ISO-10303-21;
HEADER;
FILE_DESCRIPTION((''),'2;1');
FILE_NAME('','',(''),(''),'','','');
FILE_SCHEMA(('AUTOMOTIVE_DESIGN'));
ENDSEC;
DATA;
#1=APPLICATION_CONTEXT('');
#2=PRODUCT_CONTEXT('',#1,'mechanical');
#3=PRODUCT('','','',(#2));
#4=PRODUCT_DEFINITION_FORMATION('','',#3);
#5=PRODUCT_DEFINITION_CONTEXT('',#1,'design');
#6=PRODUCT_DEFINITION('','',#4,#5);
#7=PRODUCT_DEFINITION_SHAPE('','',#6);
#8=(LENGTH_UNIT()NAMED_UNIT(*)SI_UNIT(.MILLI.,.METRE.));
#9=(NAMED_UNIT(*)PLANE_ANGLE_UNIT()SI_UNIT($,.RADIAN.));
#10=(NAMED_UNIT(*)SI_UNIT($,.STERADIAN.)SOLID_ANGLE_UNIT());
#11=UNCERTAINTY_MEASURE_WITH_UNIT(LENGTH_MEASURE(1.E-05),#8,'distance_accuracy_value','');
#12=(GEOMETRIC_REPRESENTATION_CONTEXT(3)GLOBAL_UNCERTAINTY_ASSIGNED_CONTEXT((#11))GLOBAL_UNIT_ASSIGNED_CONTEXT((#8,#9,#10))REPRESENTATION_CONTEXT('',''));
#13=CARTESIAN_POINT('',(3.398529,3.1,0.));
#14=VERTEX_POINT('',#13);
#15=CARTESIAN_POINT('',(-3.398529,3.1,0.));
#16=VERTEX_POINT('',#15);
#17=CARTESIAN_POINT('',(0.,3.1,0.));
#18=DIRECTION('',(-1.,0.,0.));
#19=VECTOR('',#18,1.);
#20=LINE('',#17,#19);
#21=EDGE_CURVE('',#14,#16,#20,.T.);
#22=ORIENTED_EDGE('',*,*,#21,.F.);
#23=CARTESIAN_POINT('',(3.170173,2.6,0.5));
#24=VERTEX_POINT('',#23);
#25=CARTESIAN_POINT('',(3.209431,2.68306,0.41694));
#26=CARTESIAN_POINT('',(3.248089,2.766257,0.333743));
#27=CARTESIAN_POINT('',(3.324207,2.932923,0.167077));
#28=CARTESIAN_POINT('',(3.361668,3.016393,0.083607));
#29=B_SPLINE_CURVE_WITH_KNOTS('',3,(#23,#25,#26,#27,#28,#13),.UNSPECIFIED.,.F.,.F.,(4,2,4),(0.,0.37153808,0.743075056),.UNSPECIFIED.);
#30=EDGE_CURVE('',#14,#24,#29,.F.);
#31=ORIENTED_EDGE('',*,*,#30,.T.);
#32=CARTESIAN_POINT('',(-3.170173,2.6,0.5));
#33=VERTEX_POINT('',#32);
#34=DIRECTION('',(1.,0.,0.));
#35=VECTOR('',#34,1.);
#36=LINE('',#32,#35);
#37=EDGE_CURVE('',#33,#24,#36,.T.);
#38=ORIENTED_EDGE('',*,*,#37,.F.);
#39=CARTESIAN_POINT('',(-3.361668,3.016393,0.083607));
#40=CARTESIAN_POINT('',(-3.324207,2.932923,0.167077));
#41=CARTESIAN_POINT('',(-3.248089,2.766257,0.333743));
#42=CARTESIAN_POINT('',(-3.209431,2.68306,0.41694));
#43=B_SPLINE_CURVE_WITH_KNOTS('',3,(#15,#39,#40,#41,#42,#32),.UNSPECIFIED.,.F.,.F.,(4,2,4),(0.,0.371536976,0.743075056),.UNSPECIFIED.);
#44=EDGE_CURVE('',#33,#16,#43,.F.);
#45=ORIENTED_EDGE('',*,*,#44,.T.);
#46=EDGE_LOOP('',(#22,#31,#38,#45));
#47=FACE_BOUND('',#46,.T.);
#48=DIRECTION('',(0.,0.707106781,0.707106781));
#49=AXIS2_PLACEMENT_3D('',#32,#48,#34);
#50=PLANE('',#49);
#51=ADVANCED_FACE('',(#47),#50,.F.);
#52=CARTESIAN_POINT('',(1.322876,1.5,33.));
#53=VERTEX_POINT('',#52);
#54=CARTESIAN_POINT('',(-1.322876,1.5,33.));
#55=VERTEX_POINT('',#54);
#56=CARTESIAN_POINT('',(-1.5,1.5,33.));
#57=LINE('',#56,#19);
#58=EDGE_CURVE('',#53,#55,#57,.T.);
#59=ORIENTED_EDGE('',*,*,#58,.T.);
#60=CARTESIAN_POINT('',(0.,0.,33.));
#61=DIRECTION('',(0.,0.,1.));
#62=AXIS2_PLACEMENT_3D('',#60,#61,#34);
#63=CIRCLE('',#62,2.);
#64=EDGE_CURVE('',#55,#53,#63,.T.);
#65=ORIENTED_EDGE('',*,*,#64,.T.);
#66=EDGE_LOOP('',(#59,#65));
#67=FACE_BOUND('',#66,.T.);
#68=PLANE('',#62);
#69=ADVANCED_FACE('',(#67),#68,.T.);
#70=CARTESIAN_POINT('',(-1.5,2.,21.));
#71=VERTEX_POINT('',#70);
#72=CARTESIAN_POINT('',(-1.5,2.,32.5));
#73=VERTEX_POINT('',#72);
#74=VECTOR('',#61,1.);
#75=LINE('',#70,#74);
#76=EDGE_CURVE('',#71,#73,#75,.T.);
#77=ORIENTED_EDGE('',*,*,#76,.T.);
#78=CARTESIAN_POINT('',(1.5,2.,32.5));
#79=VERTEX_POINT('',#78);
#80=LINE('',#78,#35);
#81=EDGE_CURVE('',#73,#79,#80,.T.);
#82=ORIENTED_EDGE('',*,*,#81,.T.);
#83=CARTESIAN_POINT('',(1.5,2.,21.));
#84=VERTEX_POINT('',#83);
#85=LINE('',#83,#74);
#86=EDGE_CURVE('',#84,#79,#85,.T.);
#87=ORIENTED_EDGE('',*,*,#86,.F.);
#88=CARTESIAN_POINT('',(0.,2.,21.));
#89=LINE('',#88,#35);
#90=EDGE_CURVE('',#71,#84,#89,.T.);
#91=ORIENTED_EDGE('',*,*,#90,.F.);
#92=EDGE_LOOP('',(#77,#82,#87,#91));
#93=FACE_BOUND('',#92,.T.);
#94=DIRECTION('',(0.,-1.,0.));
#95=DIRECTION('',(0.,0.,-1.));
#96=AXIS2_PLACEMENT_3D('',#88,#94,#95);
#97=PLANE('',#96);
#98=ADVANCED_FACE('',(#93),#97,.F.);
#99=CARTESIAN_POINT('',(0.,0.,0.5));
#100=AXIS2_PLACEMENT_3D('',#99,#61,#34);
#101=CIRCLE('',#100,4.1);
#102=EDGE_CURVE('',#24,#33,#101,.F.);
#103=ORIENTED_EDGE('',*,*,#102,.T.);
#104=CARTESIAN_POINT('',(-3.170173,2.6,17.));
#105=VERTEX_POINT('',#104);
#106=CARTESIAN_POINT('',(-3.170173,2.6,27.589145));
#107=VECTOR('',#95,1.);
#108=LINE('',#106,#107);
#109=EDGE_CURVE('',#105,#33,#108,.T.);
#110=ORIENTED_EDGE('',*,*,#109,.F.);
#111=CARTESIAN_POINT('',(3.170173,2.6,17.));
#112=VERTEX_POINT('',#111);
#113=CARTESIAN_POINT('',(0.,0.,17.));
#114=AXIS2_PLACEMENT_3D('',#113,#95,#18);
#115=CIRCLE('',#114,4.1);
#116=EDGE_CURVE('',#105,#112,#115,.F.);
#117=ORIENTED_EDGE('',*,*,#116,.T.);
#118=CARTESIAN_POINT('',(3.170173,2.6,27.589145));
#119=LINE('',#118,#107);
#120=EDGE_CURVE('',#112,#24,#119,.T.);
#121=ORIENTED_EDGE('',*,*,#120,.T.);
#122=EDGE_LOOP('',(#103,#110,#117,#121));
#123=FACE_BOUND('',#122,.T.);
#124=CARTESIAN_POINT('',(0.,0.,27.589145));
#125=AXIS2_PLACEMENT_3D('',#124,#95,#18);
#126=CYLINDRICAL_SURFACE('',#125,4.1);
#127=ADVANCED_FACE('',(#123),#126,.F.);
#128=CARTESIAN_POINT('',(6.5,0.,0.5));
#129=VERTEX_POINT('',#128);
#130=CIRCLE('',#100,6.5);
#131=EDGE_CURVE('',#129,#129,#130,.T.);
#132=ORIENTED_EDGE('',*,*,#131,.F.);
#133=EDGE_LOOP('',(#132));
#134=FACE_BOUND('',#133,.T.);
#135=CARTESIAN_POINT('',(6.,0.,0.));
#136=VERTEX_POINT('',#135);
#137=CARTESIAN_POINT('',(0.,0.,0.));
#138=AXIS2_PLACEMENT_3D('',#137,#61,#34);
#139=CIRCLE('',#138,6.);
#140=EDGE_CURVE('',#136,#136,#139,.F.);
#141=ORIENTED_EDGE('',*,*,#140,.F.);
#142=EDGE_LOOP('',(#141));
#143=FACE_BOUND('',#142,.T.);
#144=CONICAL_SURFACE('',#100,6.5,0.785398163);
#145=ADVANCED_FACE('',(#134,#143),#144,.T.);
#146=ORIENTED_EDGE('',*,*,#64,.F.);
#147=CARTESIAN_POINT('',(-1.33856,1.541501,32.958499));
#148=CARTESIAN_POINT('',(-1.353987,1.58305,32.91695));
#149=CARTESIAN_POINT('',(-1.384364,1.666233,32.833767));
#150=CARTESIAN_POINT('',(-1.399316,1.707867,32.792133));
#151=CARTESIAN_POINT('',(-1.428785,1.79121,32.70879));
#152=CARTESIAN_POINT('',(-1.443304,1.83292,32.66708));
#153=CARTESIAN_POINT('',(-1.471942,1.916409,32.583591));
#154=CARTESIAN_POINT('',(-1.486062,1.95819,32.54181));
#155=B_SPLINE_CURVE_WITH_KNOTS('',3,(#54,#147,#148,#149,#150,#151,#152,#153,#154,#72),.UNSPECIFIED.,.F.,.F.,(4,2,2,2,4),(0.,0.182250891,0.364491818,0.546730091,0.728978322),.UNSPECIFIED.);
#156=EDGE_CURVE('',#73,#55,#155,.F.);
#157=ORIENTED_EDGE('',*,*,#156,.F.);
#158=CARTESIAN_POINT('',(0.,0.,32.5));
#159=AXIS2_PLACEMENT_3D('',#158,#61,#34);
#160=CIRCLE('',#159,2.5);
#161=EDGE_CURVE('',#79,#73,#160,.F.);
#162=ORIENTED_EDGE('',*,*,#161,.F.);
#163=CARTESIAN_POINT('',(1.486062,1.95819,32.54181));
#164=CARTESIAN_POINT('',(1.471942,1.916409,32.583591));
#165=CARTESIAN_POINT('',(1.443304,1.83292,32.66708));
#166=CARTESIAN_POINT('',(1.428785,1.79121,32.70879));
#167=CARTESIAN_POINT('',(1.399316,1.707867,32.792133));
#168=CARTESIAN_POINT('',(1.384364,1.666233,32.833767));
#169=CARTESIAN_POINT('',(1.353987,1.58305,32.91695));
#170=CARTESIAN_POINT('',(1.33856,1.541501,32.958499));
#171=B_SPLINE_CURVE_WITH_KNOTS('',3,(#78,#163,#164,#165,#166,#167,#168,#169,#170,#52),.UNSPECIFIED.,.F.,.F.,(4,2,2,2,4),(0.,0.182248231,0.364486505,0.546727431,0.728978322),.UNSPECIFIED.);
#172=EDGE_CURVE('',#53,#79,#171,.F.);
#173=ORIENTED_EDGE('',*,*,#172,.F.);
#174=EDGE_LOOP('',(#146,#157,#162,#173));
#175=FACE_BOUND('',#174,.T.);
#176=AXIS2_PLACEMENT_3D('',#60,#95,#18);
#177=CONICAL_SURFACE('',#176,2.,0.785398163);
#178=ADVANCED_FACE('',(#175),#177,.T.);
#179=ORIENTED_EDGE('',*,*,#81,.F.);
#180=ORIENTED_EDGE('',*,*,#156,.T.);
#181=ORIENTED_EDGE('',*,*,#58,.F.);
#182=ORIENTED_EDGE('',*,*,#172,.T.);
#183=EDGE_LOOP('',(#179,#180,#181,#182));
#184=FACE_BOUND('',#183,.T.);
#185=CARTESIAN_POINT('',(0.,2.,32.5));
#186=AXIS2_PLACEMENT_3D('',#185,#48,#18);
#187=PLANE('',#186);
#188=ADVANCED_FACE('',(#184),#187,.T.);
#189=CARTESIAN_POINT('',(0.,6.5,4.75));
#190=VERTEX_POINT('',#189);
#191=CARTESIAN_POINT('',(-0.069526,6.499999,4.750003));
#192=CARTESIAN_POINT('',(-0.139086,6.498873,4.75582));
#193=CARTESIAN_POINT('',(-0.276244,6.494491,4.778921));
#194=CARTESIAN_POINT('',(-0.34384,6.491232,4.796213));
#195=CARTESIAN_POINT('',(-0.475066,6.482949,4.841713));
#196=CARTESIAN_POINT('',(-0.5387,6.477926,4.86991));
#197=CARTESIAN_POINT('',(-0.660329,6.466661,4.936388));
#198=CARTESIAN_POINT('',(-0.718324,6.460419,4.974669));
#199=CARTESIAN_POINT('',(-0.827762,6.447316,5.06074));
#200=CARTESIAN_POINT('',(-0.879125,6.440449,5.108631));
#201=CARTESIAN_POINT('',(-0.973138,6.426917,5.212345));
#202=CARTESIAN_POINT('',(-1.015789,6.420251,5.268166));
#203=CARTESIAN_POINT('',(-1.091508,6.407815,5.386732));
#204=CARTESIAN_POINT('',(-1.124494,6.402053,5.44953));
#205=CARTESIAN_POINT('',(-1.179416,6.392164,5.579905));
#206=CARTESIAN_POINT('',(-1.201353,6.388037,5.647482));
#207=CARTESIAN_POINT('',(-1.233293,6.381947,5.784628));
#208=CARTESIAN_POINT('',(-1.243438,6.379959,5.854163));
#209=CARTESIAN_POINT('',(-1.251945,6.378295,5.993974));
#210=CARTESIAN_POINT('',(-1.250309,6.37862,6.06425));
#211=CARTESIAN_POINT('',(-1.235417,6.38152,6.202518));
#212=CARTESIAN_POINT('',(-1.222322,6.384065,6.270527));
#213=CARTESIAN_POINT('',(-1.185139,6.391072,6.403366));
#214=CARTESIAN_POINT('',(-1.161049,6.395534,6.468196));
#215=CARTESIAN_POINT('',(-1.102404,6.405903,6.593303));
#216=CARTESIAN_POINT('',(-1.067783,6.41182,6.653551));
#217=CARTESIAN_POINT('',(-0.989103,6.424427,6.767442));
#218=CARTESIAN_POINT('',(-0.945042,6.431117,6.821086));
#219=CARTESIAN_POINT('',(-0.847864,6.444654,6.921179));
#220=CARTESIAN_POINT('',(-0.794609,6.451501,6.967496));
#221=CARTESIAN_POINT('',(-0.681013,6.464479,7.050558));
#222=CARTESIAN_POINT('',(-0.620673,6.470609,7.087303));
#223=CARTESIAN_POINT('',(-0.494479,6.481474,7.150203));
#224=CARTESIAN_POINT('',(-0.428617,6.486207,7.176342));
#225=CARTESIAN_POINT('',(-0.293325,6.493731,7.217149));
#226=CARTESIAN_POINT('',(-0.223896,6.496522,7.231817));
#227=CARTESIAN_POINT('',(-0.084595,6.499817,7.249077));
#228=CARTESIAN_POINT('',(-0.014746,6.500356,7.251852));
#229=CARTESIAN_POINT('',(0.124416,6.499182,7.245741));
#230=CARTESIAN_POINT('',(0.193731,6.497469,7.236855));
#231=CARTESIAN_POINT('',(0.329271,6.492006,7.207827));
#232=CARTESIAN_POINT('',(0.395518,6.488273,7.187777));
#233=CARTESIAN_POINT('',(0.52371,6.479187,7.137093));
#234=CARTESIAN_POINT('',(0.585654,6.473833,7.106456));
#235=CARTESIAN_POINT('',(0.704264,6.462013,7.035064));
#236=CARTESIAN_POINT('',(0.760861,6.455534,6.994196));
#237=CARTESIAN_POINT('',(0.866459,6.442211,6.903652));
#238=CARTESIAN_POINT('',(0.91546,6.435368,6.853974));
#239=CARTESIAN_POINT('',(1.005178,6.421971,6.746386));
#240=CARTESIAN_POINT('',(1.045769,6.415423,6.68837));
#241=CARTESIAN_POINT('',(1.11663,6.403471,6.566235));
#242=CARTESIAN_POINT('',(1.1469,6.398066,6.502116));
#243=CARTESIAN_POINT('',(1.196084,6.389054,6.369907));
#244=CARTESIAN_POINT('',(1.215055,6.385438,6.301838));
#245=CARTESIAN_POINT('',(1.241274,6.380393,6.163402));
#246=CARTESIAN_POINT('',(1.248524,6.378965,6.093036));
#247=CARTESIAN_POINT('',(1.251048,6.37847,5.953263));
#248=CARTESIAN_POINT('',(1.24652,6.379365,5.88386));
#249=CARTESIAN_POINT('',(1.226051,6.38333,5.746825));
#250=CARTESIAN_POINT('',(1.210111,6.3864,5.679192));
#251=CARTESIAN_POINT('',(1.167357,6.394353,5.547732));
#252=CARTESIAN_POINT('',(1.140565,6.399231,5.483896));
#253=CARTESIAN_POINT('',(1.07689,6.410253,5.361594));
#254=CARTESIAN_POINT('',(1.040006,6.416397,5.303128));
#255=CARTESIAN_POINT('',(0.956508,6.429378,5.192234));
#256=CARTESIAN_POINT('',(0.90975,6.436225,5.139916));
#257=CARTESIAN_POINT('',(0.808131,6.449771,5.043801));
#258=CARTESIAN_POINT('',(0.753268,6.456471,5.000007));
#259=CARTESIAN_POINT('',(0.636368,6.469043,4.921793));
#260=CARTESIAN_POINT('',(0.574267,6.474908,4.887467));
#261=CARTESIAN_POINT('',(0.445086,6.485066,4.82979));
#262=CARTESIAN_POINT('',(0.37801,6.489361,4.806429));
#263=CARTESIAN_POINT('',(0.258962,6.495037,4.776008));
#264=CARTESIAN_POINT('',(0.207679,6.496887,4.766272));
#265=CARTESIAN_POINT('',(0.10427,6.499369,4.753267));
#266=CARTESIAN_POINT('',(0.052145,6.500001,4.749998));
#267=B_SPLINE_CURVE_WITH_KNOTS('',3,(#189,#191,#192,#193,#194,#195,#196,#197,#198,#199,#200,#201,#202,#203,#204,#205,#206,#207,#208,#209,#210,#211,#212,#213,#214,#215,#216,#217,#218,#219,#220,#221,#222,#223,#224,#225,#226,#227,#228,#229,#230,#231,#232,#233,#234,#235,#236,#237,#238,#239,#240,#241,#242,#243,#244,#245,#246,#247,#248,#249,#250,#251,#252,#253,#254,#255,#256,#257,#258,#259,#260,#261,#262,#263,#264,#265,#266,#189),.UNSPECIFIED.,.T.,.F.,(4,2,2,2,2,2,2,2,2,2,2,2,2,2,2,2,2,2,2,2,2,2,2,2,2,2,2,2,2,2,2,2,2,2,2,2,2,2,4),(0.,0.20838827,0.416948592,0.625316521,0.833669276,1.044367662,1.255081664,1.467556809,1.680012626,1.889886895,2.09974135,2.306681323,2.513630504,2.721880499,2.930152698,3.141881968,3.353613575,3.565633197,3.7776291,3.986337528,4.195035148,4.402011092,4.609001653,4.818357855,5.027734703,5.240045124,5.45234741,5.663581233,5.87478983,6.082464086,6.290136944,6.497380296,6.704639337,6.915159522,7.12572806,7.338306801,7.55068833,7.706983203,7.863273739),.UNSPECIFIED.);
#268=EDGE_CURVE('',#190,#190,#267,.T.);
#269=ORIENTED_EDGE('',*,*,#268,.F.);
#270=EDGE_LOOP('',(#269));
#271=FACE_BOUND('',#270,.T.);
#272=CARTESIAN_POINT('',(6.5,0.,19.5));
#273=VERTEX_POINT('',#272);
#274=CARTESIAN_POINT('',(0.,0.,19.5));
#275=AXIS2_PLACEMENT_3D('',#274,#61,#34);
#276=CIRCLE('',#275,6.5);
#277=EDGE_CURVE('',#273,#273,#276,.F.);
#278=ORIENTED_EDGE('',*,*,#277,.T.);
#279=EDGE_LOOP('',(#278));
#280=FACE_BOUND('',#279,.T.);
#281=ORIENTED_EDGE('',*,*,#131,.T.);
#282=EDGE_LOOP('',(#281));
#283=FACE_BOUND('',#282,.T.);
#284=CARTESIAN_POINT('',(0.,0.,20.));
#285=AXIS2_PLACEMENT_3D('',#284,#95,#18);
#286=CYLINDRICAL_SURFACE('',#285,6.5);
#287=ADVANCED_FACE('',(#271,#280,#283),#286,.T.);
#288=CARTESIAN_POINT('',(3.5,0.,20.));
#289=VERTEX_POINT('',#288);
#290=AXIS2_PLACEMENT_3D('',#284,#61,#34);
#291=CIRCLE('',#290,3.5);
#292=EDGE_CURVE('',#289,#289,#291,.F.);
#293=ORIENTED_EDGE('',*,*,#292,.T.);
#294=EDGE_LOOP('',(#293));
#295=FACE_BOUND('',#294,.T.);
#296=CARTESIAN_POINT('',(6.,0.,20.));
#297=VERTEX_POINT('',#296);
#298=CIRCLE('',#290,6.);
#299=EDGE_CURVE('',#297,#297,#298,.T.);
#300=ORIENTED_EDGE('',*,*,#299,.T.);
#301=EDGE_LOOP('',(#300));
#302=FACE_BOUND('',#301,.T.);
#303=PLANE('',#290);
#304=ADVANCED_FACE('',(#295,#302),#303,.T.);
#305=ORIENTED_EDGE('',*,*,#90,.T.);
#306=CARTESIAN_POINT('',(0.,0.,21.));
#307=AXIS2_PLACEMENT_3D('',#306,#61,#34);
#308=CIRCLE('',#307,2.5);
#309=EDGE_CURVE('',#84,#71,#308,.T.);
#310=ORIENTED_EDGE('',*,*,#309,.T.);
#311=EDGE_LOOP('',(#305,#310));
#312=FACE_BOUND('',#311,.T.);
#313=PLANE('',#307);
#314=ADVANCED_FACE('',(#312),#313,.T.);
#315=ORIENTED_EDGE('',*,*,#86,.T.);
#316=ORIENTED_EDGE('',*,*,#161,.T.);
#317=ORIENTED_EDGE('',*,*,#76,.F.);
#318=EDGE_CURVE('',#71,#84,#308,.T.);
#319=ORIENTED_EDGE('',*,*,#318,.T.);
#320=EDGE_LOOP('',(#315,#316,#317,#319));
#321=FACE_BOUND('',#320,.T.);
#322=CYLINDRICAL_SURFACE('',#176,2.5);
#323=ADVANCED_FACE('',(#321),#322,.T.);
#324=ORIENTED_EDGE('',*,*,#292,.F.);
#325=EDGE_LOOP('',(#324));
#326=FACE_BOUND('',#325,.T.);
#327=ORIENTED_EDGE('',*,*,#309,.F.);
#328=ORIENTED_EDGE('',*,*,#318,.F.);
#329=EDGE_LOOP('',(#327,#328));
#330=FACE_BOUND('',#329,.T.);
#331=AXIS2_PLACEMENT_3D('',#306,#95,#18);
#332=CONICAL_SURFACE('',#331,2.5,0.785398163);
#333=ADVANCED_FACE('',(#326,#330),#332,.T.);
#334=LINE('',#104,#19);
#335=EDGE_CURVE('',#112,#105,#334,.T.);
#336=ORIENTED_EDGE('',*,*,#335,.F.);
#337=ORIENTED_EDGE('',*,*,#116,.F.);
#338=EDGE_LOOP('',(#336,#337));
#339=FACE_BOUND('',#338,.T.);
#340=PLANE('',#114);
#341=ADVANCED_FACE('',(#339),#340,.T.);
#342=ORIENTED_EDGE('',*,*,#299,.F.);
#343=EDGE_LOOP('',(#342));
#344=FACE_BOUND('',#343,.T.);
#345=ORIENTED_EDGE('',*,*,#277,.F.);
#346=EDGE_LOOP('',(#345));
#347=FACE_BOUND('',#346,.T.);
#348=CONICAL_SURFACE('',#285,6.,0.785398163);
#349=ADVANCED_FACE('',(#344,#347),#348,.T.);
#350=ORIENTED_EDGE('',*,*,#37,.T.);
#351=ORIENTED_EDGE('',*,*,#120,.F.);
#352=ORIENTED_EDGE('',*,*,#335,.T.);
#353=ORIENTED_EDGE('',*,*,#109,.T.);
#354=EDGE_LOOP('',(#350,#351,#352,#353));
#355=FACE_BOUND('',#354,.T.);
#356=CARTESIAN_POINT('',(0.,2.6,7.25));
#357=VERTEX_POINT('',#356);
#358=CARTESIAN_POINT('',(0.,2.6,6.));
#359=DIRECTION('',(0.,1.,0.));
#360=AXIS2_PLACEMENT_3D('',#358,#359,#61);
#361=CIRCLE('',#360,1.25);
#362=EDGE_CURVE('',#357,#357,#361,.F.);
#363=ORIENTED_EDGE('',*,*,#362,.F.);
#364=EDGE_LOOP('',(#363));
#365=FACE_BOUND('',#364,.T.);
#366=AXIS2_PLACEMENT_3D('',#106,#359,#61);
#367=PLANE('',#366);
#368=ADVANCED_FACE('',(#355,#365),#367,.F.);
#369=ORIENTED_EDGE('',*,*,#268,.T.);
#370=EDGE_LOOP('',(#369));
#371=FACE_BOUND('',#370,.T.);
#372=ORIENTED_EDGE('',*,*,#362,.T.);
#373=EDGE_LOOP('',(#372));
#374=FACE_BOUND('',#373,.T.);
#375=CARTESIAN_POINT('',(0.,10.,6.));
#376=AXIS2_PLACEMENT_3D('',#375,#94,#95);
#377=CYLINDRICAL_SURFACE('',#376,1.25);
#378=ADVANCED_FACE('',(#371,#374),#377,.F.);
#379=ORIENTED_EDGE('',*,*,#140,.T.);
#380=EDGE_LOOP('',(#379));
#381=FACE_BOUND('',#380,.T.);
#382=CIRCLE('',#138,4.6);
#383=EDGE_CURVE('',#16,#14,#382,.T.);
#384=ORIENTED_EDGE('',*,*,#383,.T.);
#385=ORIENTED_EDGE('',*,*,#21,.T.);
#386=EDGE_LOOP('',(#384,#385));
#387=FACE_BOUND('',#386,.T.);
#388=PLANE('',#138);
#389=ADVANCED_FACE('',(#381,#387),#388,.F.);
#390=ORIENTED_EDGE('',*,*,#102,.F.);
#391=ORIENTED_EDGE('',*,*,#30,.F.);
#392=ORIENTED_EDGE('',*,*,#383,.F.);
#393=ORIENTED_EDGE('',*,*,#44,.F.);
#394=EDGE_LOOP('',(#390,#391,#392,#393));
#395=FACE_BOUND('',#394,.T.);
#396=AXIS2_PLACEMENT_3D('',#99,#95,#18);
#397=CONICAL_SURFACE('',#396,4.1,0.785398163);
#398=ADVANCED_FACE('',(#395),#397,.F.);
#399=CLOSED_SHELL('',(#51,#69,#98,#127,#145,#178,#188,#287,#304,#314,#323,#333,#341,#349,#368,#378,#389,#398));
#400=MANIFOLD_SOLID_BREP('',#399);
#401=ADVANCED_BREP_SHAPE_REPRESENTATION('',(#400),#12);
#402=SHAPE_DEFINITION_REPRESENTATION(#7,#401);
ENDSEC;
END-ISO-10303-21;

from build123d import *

# Parameters (mm, degrees)
SKETCH_1_R          = 6.5
EXTRUDE_1_DEPTH     = 20
CUT_EXTRUDE_1_DEPTH = 17
SKETCH_3_R          = 2.5
EXTRUDE_2_DEPTH     = 13
CUT_EXTRUDE_START   = -12
CUT_EXTRUDE_2_DEPTH = 12
CHAMFER_1_SIZE      = 1
CUT_EXTRUDE_3_DEPTH = 17
CHAMFER_2_SIZE      = 0.5
CHAMFER_3_SIZE      = 0.5
SKETCH_6_R          = 1.25
CUT_EXTRUDE_4_DEPTH = 10


with BuildPart() as part:
    # 草图1 → 凸台-拉伸1 (new body)
    with BuildSketch(Plane.XY):
        Circle(SKETCH_1_R)
    extrude(amount=EXTRUDE_1_DEPTH)

    # 草图2 → 切除-拉伸1 (cut)
    with BuildSketch(Plane(origin=(0, 0, 0), x_dir=(-1, 0, 0), z_dir=(0, 0, -1))):
        with BuildLine():
            Line((3.122498999, 2.5), (-3.122498999, 2.5))
            ThreePointArc((-3.122498999, 2.5), (-3.605551275, -1.732050808), (0, -4))
            ThreePointArc((0, -4), (2.828427125, -2.828427125), (4, 0))
            ThreePointArc((4, 0), (3.774254628, 1.324764885), (3.122498999, 2.5))
        make_face()
    extrude(amount=-CUT_EXTRUDE_1_DEPTH, mode=Mode.SUBTRACT)

    # 草图3 → 凸台-拉伸2 (add)
    with BuildSketch(Plane.XY.offset(20)):
        with Locations(Location((0, 0, 0), (0, 0, 180))):
            Circle(SKETCH_3_R)
    extrude(amount=EXTRUDE_2_DEPTH)

    # 草图4 → 切除-拉伸2 (cut)
    with BuildSketch(Plane.XY.offset(33).offset(CUT_EXTRUDE_START)):
        with BuildLine():
            Line((-1.5, 2), (1.5, 2))
            ThreePointArc((1.5, 2), (0, 2.5), (-1.5, 2))
        make_face()
    extrude(amount=CUT_EXTRUDE_2_DEPTH, mode=Mode.SUBTRACT)

    # 倒角1
    chamfer_1_edges = [part.edges().sort_by_distance(p)[0] for p in [
        (2.5, 0, 20),
    ]]
    chamfer(chamfer_1_edges, length=CHAMFER_1_SIZE - 0.0001)  # a hair under: the kernel refuses the full size

    # 草图5 → 切除-拉伸3 (cut)
    with BuildSketch(Plane(origin=(0, 0, 0), x_dir=(-1, 0, 0), z_dir=(0, 0, -1))):
        with BuildLine():
            Line((3.170173497, 2.6), (-3.170173497, 2.6))
            ThreePointArc((-3.170173497, 2.6), (0, -4.1), (3.170173497, 2.6))
        make_face()
    extrude(amount=-CUT_EXTRUDE_3_DEPTH, mode=Mode.SUBTRACT)

    # 倒角2
    chamfer_2_edges = [part.edges().sort_by_distance(p)[0] for p in [
        (1.118033989, -2.236067977, 33),
        (0, 2, 33),
    ]]
    chamfer(chamfer_2_edges, length=CHAMFER_2_SIZE - 0.0001)  # a hair under: the kernel refuses the full size

    # 倒角3
    chamfer_3_edges = [part.edges().sort_by_distance(p)[0] for p in [
        (-6.5, 0, 0),
        (0, -4.1, 0),
        (0, 2.6, 0),
        (-6.5, 0, 20),
    ]]
    chamfer(chamfer_3_edges, length=CHAMFER_3_SIZE)

    # 草图6 → 切除-拉伸4 (cut)
    with BuildSketch(Plane(origin=(0, 0, 0), x_dir=(1, 0, 0), z_dir=(0, 1, 0))):
        with Locations(Location((0, -6, 0), (0, 0, 90))):
            Circle(SKETCH_6_R)
    extrude(amount=CUT_EXTRUDE_4_DEPTH, mode=Mode.SUBTRACT)


solid = part.part
